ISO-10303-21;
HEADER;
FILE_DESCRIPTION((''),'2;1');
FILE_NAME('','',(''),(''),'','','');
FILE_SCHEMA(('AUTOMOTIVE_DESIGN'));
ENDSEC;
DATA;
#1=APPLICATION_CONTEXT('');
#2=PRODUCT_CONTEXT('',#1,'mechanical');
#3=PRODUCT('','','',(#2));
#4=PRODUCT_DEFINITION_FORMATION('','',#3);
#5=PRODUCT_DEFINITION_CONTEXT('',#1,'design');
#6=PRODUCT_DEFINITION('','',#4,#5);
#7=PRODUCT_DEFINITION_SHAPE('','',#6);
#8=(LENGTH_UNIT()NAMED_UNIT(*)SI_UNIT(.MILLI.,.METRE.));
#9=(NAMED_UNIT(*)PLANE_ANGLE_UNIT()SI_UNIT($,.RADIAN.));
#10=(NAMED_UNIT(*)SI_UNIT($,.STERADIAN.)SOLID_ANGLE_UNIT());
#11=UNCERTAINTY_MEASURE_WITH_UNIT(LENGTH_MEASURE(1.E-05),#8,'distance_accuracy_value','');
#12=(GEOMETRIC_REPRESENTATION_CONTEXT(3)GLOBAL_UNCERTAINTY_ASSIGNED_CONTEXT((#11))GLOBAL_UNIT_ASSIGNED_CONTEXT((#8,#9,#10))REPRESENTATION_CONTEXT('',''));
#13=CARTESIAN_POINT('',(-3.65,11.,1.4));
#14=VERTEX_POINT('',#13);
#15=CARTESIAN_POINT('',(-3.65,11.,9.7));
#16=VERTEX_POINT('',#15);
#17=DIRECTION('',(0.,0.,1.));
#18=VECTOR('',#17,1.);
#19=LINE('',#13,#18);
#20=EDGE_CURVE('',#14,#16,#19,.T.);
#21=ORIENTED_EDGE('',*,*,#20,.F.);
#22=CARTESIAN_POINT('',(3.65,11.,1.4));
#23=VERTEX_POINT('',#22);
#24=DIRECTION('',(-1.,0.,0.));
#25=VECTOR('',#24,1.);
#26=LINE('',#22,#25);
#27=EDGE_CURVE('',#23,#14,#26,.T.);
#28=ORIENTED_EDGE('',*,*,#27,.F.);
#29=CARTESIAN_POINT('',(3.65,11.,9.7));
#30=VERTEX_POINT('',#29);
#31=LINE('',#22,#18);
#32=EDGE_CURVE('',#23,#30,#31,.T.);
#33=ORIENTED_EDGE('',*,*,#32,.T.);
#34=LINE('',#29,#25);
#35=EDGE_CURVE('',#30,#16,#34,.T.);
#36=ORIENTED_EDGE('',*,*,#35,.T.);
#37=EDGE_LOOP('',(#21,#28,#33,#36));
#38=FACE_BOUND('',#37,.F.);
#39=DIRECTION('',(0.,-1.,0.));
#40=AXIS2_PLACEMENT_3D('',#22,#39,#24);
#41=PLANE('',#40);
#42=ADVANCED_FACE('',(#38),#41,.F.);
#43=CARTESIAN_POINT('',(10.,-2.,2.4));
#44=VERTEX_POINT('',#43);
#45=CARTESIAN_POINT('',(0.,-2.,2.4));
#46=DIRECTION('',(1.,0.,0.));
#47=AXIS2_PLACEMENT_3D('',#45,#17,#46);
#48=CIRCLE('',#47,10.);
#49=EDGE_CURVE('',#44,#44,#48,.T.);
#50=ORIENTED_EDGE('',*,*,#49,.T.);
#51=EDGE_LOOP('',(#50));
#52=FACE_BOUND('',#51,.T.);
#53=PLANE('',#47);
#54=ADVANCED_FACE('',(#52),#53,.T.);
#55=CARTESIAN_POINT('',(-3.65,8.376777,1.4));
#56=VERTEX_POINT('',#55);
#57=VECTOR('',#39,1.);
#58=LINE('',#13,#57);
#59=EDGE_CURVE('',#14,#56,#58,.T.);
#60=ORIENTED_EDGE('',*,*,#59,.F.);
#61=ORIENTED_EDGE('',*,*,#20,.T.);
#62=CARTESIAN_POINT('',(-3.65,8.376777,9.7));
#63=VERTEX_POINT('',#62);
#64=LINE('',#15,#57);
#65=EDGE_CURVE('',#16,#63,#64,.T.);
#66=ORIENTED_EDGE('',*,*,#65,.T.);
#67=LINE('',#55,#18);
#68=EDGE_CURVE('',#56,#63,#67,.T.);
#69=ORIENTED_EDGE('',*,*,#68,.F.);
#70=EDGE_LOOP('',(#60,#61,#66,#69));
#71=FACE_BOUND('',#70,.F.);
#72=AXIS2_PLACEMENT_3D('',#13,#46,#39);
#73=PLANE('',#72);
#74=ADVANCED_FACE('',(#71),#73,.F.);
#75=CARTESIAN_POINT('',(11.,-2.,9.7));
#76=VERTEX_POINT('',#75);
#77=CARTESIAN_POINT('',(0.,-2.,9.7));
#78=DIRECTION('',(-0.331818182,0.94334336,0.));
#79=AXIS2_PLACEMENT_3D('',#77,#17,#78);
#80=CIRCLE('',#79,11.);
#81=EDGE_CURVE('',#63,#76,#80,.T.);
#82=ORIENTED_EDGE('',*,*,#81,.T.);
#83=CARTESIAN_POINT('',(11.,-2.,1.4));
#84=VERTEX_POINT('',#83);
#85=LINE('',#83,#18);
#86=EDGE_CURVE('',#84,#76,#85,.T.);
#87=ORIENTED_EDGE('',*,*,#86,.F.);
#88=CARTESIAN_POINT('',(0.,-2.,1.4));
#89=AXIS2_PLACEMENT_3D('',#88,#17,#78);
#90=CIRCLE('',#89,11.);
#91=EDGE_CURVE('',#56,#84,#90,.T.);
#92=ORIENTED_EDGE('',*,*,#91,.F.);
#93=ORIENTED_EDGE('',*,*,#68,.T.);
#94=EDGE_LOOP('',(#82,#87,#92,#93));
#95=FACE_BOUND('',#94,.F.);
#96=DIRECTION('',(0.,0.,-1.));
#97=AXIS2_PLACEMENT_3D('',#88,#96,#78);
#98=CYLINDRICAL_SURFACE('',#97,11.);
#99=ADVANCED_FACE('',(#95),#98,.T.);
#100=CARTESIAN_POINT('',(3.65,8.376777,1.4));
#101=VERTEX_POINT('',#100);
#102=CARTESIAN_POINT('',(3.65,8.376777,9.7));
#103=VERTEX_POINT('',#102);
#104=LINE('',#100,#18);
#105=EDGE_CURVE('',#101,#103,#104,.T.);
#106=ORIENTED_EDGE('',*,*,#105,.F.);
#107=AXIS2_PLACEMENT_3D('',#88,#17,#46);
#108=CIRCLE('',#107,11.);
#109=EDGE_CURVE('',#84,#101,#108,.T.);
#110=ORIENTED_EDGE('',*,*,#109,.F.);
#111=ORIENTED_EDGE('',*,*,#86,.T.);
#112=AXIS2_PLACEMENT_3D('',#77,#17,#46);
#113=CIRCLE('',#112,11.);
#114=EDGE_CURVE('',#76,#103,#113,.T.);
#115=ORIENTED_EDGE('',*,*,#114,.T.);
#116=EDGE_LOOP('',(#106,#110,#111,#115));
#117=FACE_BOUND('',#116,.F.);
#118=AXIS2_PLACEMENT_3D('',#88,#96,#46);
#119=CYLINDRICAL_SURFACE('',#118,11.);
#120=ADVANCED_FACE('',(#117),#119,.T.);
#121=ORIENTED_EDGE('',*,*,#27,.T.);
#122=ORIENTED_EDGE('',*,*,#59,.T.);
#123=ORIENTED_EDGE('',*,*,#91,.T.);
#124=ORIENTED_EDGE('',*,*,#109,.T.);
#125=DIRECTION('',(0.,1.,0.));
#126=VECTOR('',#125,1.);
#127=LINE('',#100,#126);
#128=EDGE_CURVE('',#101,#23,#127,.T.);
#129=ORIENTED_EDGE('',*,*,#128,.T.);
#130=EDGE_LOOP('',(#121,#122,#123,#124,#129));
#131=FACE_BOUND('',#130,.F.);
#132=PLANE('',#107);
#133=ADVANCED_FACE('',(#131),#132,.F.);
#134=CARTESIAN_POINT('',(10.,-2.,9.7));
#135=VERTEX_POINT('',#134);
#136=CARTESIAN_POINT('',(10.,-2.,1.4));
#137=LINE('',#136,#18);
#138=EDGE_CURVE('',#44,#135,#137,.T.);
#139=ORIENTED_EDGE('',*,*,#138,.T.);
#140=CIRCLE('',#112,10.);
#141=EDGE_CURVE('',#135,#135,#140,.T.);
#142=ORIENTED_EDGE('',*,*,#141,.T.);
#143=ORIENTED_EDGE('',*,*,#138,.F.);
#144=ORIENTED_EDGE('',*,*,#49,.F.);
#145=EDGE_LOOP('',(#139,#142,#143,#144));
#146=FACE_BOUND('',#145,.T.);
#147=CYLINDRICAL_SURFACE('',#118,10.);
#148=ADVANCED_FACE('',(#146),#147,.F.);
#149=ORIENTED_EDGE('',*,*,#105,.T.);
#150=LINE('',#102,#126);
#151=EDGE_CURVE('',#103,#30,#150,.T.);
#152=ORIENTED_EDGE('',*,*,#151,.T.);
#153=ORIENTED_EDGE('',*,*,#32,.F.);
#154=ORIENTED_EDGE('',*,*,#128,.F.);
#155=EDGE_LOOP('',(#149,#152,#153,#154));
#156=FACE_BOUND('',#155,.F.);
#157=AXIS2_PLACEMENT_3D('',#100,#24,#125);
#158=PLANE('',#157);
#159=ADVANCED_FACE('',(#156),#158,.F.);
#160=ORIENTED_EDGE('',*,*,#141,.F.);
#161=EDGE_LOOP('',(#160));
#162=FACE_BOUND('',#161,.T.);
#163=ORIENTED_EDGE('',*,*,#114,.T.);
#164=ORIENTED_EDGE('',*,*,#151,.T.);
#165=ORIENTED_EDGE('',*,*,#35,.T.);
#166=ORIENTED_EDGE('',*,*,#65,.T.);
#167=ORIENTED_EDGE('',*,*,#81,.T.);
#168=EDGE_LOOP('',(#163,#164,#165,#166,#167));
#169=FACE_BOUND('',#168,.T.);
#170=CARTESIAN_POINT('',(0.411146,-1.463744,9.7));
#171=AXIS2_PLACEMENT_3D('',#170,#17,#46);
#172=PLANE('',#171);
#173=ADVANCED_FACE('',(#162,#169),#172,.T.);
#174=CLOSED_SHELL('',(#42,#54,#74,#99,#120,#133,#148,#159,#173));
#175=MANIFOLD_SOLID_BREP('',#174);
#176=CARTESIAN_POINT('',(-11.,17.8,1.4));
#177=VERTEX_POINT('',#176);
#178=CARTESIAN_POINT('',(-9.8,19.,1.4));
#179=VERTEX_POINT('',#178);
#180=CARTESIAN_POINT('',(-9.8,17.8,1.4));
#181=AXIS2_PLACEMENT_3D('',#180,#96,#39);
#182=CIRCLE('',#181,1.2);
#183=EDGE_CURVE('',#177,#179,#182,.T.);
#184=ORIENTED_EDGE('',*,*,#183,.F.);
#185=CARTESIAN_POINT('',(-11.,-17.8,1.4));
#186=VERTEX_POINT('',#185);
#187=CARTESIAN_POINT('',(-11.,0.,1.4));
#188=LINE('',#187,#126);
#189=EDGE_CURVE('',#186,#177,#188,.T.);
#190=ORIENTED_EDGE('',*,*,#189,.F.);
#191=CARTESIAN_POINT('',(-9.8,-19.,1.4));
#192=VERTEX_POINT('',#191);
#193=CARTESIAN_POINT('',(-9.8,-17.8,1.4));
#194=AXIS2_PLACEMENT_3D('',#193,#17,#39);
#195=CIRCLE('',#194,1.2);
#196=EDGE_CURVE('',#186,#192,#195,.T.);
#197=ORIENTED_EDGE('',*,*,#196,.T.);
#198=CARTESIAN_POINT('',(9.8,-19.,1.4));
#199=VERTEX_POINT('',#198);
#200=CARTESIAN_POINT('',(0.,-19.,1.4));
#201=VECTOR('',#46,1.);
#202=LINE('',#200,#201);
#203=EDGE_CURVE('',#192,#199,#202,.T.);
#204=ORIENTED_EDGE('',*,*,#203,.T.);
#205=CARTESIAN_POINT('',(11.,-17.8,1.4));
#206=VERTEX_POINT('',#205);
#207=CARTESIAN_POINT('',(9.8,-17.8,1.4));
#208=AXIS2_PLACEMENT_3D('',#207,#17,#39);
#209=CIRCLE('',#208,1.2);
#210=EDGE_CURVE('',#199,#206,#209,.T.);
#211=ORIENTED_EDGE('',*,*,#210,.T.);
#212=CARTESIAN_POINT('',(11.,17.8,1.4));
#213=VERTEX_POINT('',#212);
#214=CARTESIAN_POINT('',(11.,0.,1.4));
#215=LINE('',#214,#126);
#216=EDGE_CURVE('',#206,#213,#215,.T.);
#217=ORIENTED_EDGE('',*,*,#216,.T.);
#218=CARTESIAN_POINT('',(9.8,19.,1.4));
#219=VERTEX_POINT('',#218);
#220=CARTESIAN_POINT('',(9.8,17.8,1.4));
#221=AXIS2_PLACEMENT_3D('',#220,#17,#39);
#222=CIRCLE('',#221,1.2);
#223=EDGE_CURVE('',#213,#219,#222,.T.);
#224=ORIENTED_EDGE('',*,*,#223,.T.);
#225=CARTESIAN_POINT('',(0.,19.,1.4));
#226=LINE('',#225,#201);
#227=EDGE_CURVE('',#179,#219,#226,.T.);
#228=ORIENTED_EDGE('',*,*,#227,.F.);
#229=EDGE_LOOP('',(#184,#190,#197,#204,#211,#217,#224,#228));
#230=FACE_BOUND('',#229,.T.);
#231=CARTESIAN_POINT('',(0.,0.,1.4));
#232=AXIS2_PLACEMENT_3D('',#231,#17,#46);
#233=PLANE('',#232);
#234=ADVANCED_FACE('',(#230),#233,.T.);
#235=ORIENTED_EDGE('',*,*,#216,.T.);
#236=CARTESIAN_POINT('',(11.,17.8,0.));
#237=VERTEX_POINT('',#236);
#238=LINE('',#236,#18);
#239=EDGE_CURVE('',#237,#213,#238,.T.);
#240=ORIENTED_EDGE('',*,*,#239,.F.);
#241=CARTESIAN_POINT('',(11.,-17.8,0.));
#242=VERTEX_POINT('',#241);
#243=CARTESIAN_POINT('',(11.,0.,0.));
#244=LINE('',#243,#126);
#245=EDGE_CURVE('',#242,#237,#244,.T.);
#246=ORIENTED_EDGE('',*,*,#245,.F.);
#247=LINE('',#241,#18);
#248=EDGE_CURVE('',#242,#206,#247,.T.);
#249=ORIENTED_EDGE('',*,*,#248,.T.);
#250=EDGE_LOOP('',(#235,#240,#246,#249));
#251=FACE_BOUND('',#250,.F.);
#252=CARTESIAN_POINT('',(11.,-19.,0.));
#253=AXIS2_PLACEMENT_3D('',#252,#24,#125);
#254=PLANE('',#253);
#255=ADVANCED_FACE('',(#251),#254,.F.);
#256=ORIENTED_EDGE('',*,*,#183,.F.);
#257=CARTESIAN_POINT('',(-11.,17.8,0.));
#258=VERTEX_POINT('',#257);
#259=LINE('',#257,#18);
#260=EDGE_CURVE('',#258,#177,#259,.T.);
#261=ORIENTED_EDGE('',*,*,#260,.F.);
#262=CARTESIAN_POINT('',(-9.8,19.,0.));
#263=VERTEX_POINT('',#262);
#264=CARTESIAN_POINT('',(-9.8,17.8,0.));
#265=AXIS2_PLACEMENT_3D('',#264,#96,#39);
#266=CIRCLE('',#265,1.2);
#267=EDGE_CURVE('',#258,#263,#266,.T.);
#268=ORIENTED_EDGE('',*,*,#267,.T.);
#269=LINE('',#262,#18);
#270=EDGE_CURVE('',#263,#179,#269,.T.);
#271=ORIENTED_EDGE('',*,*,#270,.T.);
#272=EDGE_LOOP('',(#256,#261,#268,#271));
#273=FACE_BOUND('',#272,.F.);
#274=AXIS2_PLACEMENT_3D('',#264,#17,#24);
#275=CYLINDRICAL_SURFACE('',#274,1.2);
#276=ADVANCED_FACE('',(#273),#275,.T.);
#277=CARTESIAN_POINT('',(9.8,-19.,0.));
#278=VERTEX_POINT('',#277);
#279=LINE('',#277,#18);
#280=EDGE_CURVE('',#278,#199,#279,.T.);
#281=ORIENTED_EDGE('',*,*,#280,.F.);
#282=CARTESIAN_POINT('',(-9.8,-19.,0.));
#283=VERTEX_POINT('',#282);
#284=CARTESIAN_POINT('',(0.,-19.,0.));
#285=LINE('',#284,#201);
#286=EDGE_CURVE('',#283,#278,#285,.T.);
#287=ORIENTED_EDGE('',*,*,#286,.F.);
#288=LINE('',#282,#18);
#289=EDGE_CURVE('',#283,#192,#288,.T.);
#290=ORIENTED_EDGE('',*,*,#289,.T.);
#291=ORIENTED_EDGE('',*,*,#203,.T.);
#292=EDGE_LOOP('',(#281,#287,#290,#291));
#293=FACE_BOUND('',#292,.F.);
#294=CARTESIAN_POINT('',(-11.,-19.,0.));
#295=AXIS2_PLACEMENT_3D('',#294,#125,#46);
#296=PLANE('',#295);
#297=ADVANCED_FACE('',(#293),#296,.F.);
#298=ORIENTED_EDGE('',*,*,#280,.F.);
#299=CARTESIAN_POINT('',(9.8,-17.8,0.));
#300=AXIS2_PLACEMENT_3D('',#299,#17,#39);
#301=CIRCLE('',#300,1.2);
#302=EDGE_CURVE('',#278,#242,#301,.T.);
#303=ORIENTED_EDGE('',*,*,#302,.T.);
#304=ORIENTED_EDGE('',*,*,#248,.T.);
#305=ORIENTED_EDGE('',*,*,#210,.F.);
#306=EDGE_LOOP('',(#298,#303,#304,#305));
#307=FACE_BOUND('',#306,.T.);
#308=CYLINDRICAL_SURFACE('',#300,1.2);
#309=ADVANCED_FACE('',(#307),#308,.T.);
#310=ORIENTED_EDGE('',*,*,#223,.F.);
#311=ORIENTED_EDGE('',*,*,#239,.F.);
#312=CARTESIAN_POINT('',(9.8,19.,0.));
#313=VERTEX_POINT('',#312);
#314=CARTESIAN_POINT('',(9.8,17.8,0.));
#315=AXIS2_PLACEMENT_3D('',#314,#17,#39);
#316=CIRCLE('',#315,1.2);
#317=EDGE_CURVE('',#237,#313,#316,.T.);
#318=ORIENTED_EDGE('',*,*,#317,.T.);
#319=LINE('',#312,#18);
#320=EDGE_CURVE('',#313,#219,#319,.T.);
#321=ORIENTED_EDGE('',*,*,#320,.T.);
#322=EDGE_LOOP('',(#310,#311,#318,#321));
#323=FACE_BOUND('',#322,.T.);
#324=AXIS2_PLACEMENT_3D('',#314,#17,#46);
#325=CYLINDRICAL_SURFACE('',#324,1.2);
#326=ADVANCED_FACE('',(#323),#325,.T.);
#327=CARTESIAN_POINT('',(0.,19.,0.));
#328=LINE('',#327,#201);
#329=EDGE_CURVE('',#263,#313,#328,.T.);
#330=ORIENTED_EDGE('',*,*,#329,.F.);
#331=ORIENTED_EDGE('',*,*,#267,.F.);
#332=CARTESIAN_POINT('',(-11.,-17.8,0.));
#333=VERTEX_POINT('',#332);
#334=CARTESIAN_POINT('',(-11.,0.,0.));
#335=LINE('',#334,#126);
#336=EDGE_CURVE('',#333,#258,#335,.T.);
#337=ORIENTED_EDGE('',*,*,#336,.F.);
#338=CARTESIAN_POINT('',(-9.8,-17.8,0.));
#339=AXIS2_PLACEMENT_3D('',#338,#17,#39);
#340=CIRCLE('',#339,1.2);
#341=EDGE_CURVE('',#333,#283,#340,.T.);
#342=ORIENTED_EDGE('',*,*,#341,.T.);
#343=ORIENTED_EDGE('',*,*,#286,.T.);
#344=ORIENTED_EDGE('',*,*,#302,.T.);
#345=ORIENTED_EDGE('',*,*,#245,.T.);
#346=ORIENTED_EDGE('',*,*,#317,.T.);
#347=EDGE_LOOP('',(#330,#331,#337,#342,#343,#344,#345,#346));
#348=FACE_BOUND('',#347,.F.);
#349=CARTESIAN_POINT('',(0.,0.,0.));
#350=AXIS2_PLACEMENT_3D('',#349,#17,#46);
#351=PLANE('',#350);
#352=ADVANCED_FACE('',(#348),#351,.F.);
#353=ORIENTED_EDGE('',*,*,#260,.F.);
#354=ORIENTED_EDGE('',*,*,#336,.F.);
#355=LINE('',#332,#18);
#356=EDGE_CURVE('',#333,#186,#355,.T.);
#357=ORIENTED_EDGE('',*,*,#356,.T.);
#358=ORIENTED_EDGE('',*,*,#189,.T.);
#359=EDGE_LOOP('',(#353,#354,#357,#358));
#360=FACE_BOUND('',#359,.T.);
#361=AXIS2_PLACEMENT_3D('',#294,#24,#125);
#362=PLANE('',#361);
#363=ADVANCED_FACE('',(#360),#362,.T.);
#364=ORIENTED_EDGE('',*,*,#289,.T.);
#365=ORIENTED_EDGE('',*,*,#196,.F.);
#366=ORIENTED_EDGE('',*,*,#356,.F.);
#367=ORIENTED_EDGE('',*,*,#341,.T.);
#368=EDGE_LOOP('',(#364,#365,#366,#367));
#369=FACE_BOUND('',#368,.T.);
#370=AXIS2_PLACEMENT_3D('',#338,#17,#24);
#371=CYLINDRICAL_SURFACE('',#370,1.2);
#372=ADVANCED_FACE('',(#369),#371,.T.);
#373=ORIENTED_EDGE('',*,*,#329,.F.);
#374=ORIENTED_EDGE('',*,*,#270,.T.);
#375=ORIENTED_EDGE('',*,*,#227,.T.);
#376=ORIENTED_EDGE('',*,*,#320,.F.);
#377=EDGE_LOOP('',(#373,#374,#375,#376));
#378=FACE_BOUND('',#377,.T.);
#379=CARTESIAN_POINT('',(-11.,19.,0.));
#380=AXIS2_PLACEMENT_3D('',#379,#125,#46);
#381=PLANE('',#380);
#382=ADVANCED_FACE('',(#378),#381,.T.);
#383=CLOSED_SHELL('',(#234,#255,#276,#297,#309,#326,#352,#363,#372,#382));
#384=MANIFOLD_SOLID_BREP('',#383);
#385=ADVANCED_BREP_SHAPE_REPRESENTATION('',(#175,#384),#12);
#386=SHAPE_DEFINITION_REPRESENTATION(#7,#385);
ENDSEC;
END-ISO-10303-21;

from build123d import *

# Parameters (mm, degrees)
F0_W     = 22
F0_H     = 38
F1_DEPTH = 1.4
F2_R     = 1.2
F3_R     = 10
F4_DEPTH = 8.3
F5_DEPTH = 1


with BuildPart() as f1:
    # F0 (on Top) → F1 (new body)
    with BuildSketch(Plane.XY):
        Rectangle(F0_W, F0_H)
    extrude(amount=F1_DEPTH)

    # F2
    f2_edges = [f1.edges().sort_by_distance(p)[0] for p in [
        (-11, 19, 0.7),
        (11, 19, 0.7),
        (-11, -19, 0.7),
        (11, -19, 0.7),
    ]]
    fillet(f2_edges, radius=F2_R)


with BuildPart() as f4:
    # F3 (on face) → F4 (new body)
    with BuildSketch(Plane.XY.offset(1.4)):
        with BuildLine():
            ThreePointArc((-3.65, 8.3767769563), (-6.3580657436, -10.976357836), (11, -2))
            ThreePointArc((11, -2), (8.976357836, 4.3580657436), (3.65, 8.3767769563))
            Line((3.65, 8.3767769563), (-3.65, 8.3767769563))
        make_face()
        with Locations((0, -2)):
            Circle(F3_R, mode=Mode.SUBTRACT)
        with BuildLine():
            Line((-3.65, 8.3767769563), (3.65, 8.3767769563))
            ThreePointArc((3.65, 8.3767769563), (0, 9), (-3.65, 8.3767769563))
        make_face()
        with BuildLine():
            ThreePointArc((-3.65, 8.3767769563), (0, 9), (3.65, 8.3767769563))
            Line((3.65, 8.3767769563), (3.65, 11))
            Line((3.65, 11), (-3.65, 11))
            Line((-3.65, 11), (-3.65, 8.3767769563))
        make_face()
    extrude(amount=F4_DEPTH)

    # F3 (on face) → F5 (join)
    with BuildSketch(Plane.XY.offset(1.4)):
        with Locations((0, -2)):
            Circle(F3_R)
    extrude(amount=F5_DEPTH)


solid = Compound([f1.part, f4.part])
